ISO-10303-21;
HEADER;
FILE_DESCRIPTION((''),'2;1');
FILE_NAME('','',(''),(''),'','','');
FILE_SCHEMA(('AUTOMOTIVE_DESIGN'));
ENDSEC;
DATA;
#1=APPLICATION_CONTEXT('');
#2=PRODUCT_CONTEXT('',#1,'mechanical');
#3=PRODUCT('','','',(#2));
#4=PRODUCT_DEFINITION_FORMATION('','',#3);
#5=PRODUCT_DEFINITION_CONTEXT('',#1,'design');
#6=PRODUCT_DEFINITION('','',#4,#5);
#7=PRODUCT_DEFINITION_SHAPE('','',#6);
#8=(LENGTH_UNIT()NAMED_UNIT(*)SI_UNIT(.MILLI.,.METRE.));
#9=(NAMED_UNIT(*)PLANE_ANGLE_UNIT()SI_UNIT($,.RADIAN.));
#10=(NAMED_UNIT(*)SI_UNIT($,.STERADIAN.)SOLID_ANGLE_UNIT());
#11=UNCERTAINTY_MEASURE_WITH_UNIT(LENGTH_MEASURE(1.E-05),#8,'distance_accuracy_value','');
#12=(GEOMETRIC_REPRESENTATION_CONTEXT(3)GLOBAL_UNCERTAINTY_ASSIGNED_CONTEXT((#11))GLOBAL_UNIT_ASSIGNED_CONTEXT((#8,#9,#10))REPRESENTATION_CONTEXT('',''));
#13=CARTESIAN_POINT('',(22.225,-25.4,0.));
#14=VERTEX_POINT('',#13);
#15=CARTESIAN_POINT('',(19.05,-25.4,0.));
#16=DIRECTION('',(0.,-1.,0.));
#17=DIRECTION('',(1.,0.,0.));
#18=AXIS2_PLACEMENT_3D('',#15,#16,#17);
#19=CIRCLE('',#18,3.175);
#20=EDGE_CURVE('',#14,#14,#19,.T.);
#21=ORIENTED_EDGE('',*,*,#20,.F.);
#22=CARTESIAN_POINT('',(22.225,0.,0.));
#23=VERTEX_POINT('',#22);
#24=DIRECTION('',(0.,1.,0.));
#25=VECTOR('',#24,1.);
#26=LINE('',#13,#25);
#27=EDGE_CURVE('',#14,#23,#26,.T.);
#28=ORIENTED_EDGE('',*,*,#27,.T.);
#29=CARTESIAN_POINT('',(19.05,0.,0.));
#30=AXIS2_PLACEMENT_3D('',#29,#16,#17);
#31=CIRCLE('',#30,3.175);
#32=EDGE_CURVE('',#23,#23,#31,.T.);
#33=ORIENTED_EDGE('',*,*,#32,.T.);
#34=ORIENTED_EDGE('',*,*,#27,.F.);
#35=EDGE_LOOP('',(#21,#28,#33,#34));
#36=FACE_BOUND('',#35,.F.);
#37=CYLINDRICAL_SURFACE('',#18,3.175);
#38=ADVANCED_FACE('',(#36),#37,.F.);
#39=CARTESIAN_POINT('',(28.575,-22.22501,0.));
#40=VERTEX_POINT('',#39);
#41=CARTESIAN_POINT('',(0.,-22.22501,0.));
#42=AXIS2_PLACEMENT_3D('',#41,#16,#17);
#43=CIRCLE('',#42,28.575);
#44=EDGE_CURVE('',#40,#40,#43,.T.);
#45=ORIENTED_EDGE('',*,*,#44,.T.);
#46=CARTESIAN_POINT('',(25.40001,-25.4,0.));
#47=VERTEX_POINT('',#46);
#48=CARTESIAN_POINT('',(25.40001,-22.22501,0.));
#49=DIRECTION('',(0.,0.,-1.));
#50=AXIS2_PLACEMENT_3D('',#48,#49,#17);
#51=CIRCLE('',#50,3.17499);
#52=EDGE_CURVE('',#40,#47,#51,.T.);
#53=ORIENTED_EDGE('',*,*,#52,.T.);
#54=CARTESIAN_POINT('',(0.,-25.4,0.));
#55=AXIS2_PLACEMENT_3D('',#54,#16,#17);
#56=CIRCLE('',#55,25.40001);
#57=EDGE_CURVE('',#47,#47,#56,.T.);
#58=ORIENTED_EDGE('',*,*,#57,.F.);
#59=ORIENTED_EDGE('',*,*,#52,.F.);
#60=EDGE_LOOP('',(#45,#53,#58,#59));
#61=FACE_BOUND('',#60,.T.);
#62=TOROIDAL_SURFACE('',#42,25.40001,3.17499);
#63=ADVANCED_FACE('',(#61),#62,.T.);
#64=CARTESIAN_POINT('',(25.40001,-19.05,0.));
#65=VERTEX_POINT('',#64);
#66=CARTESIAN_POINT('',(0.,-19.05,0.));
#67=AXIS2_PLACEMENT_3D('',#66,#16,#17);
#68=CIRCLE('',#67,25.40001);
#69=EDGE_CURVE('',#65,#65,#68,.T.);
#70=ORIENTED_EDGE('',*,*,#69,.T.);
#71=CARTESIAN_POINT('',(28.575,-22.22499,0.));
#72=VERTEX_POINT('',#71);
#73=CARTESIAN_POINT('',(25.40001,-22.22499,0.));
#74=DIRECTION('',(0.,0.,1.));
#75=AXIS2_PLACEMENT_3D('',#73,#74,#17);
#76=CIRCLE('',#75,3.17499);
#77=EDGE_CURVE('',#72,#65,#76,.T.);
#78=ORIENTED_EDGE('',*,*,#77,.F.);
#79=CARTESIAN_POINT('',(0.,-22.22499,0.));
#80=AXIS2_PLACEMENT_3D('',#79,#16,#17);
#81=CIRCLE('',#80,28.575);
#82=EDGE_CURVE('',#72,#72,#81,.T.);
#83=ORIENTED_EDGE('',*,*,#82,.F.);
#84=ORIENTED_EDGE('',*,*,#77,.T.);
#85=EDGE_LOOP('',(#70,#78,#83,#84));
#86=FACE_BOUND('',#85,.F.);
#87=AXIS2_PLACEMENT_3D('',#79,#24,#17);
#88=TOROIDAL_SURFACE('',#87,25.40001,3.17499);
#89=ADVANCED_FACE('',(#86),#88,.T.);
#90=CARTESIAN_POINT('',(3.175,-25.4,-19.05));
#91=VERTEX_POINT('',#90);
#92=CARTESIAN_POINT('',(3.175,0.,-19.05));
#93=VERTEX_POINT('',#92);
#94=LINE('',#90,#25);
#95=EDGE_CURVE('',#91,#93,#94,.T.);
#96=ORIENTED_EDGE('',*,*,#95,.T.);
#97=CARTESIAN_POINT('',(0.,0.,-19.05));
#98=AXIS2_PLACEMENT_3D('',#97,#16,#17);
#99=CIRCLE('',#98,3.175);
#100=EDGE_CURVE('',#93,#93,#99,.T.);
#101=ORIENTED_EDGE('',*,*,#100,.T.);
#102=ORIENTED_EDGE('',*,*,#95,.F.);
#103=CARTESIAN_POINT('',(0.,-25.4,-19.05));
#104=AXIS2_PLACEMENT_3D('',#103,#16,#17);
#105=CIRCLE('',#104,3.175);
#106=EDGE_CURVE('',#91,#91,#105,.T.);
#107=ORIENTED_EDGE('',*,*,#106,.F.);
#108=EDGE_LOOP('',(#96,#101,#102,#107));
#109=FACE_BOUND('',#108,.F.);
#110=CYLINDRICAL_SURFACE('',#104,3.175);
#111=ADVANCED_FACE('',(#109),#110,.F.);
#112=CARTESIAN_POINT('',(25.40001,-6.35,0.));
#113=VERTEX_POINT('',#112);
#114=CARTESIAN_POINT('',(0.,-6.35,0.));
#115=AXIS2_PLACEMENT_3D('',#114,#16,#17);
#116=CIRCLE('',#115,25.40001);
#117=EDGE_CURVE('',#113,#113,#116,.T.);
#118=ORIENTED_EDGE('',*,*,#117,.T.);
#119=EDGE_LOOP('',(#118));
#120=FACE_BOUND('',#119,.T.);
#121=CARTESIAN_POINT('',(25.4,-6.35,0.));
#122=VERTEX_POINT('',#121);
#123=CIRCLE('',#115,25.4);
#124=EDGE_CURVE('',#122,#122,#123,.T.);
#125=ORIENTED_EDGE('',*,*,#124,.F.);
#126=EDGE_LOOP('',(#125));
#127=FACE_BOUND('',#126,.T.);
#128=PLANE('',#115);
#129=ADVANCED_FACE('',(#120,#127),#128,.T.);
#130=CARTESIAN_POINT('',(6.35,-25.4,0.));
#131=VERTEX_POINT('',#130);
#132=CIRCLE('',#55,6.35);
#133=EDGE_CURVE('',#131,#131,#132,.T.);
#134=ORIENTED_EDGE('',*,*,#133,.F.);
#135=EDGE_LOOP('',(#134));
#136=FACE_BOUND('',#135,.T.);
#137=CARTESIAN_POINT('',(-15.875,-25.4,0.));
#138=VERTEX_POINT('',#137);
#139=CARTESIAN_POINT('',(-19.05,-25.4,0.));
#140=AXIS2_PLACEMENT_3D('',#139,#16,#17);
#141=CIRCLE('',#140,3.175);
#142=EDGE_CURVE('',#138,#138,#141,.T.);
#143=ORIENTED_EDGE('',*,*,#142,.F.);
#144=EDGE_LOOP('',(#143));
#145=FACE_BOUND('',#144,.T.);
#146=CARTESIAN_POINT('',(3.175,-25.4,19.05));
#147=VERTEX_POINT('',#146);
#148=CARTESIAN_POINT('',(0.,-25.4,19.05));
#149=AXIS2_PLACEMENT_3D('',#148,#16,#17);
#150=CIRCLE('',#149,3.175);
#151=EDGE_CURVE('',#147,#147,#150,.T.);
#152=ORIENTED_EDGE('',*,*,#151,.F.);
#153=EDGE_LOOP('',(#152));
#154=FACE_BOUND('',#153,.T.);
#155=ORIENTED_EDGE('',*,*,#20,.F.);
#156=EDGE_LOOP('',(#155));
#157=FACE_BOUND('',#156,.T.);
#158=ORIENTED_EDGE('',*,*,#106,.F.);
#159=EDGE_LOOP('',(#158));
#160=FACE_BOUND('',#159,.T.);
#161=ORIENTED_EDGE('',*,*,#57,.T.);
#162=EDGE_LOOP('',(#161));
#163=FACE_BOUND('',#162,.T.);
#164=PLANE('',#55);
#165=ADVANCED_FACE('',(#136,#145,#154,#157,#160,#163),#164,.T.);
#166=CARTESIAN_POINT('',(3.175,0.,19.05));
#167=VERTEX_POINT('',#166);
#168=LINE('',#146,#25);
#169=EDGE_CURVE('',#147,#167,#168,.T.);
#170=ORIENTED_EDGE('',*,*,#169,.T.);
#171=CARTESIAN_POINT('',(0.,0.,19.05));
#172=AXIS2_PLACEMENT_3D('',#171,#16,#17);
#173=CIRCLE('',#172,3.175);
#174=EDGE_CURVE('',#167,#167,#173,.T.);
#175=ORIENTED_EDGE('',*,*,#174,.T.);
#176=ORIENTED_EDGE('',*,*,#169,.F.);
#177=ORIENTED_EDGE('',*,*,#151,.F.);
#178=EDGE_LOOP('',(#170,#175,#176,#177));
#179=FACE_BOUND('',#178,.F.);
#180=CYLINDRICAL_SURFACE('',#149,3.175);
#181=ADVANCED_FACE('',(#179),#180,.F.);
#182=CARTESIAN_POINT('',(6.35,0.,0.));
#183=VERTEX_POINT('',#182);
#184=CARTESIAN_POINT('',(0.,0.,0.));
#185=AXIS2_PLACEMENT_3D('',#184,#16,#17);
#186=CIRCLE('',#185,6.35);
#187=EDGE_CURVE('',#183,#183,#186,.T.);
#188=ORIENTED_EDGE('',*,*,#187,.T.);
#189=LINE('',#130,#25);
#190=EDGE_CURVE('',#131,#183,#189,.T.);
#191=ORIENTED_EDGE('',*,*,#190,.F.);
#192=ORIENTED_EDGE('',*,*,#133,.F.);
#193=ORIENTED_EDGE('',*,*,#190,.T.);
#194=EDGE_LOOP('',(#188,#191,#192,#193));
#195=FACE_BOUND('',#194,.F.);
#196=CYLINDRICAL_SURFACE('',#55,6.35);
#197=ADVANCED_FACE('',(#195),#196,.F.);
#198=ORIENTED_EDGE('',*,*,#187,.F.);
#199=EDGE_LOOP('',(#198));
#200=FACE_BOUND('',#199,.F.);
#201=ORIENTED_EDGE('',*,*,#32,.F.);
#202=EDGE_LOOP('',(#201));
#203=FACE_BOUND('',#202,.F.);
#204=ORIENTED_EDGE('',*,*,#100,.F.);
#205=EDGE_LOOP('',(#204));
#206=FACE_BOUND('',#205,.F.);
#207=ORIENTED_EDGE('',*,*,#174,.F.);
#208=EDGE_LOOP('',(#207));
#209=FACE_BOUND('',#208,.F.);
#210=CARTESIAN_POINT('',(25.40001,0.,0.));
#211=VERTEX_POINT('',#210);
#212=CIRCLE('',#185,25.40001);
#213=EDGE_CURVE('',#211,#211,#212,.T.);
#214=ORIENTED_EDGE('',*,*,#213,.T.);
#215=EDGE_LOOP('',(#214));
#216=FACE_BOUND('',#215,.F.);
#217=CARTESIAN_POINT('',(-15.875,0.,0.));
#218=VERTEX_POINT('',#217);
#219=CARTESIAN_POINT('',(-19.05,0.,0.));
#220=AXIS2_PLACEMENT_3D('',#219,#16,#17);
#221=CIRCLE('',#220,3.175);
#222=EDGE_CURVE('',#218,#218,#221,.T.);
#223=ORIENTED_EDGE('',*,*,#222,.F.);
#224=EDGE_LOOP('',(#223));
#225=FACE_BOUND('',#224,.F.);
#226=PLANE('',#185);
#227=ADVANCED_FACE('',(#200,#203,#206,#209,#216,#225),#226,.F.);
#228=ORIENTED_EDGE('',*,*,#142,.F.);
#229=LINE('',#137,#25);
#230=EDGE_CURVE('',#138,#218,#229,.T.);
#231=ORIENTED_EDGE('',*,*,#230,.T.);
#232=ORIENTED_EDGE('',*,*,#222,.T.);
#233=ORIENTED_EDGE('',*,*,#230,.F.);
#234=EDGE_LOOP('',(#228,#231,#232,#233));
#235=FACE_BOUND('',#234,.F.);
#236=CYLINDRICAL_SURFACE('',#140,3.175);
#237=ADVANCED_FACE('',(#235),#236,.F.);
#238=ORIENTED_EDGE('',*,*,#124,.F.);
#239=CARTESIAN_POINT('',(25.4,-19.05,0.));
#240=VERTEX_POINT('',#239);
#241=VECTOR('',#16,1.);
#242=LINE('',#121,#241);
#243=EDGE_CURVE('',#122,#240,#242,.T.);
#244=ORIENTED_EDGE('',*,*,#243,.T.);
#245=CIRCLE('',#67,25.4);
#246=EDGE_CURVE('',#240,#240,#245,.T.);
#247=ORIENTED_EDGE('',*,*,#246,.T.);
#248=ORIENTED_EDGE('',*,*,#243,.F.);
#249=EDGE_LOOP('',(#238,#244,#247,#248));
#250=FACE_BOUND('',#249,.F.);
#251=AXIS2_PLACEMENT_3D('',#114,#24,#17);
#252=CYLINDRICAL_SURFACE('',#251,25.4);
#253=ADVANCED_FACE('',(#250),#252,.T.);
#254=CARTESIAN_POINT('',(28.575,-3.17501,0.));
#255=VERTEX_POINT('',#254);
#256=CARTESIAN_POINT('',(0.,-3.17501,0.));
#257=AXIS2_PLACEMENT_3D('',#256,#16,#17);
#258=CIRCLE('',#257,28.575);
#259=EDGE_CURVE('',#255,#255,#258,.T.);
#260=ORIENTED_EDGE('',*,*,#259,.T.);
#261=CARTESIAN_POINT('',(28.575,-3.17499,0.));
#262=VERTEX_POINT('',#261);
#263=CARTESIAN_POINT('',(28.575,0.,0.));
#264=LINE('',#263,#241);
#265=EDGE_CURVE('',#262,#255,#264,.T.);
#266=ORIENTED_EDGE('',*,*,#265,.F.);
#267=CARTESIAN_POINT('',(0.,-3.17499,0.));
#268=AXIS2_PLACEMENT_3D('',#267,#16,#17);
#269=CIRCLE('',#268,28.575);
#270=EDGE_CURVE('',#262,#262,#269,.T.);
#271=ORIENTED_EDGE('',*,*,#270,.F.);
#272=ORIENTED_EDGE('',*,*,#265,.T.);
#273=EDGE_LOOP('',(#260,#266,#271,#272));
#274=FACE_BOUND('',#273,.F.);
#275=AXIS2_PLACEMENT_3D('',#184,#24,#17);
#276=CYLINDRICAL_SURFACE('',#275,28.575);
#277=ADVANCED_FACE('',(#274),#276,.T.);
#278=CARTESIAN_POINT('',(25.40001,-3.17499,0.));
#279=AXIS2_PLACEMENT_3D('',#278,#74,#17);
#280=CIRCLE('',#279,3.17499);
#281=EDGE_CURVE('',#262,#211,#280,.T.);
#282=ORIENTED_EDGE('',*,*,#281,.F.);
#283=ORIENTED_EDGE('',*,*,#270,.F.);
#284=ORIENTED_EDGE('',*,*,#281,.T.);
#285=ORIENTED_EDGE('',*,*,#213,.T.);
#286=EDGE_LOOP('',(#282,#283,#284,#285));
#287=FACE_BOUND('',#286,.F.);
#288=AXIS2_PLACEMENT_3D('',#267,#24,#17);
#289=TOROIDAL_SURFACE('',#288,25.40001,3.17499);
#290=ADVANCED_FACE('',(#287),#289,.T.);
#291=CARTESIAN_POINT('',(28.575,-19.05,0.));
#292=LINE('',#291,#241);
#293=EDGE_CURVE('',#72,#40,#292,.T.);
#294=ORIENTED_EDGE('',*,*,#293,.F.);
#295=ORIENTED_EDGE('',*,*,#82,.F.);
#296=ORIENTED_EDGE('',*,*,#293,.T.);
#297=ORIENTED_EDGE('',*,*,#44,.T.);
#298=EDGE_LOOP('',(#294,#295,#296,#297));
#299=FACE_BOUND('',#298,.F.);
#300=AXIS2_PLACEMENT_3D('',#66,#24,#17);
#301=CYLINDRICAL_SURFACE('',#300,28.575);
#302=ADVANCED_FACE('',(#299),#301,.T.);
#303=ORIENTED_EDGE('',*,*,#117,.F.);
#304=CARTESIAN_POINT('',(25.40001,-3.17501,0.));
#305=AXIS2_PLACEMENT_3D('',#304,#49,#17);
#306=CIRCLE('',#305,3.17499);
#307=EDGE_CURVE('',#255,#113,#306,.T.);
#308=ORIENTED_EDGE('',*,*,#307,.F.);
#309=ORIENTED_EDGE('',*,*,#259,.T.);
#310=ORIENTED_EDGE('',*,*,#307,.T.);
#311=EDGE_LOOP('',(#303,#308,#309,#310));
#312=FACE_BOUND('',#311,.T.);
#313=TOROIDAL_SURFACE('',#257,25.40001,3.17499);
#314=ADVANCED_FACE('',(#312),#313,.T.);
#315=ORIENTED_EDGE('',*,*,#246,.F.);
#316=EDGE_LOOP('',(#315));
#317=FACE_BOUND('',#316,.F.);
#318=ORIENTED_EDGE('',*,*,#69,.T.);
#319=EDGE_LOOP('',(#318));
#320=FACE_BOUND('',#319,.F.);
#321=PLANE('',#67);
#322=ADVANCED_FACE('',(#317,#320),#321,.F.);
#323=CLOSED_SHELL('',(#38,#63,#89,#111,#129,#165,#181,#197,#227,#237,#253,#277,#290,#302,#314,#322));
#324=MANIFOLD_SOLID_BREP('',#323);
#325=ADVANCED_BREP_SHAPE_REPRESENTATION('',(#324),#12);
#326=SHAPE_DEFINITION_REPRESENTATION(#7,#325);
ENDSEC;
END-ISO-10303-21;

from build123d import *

# Parameters (mm, degrees)
F0_R     = 28.575
F1_DEPTH = 6.35
F2_R     = 3.17499
F3_R     = 25.4
F4_DEPTH = 12.7
F5_R     = 28.575
F6_DEPTH = 6.35
F7_R     = 3.17499
F8_R     = 6.35
F8_R_2   = 3.175
F9_DEPTH = 25.401


# Not quite as in the source:
# - a fillet or chamfer is up to 0.001 mm smaller than in the source, because OpenCascade refuses the exact size


with BuildPart() as f1:
    # F0 (on Front) → F1 (new body)
    with BuildSketch(Plane.XZ):
        Circle(F0_R)
    extrude(amount=F1_DEPTH)

    # F2 (radius 3.175 in the source; OpenCascade refuses exactly that, so slightly less here)
    f2_edges = [f1.edges().sort_by_distance(p)[0] for p in [
        (28.575, -3.175, 0),
        (-28.575, 0, 0),
        (-28.575, -6.35, 0),
    ]]
    fillet(f2_edges, radius=F2_R)

    # F3 (on face) → F4 (join)
    with BuildSketch(Plane.XZ.offset(6.35)):
        Circle(F3_R)
    extrude(amount=F4_DEPTH)

    # F5 (on face) → F6 (join)
    with BuildSketch(Plane.XZ.offset(19.05)):
        Circle(F5_R)
    extrude(amount=F6_DEPTH)

    # F7 (radius 3.175 in the source; OpenCascade refuses exactly that, so slightly less here)
    f7_edges = [f1.edges().sort_by_distance(p)[0] for p in [
        (28.575, -22.225, 0),
        (-28.575, -19.05, 0),
        (-28.575, -25.4, 0),
    ]]
    fillet(f7_edges, radius=F7_R)

    # F8 (on face) → F9 (cut, through all)
    with BuildSketch(Plane.XZ.offset(25.4)):
        Circle(F8_R)
        with Locations((0, 19.05)):
            Circle(F8_R_2)
        with Locations((-19.05, 0)):
            Circle(F8_R_2)
        with Locations((19.05, 0)):
            Circle(F8_R_2)
        with Locations((0, -19.05)):
            Circle(F8_R_2)
    extrude(amount=-F9_DEPTH, mode=Mode.SUBTRACT)


solid = f1.part
